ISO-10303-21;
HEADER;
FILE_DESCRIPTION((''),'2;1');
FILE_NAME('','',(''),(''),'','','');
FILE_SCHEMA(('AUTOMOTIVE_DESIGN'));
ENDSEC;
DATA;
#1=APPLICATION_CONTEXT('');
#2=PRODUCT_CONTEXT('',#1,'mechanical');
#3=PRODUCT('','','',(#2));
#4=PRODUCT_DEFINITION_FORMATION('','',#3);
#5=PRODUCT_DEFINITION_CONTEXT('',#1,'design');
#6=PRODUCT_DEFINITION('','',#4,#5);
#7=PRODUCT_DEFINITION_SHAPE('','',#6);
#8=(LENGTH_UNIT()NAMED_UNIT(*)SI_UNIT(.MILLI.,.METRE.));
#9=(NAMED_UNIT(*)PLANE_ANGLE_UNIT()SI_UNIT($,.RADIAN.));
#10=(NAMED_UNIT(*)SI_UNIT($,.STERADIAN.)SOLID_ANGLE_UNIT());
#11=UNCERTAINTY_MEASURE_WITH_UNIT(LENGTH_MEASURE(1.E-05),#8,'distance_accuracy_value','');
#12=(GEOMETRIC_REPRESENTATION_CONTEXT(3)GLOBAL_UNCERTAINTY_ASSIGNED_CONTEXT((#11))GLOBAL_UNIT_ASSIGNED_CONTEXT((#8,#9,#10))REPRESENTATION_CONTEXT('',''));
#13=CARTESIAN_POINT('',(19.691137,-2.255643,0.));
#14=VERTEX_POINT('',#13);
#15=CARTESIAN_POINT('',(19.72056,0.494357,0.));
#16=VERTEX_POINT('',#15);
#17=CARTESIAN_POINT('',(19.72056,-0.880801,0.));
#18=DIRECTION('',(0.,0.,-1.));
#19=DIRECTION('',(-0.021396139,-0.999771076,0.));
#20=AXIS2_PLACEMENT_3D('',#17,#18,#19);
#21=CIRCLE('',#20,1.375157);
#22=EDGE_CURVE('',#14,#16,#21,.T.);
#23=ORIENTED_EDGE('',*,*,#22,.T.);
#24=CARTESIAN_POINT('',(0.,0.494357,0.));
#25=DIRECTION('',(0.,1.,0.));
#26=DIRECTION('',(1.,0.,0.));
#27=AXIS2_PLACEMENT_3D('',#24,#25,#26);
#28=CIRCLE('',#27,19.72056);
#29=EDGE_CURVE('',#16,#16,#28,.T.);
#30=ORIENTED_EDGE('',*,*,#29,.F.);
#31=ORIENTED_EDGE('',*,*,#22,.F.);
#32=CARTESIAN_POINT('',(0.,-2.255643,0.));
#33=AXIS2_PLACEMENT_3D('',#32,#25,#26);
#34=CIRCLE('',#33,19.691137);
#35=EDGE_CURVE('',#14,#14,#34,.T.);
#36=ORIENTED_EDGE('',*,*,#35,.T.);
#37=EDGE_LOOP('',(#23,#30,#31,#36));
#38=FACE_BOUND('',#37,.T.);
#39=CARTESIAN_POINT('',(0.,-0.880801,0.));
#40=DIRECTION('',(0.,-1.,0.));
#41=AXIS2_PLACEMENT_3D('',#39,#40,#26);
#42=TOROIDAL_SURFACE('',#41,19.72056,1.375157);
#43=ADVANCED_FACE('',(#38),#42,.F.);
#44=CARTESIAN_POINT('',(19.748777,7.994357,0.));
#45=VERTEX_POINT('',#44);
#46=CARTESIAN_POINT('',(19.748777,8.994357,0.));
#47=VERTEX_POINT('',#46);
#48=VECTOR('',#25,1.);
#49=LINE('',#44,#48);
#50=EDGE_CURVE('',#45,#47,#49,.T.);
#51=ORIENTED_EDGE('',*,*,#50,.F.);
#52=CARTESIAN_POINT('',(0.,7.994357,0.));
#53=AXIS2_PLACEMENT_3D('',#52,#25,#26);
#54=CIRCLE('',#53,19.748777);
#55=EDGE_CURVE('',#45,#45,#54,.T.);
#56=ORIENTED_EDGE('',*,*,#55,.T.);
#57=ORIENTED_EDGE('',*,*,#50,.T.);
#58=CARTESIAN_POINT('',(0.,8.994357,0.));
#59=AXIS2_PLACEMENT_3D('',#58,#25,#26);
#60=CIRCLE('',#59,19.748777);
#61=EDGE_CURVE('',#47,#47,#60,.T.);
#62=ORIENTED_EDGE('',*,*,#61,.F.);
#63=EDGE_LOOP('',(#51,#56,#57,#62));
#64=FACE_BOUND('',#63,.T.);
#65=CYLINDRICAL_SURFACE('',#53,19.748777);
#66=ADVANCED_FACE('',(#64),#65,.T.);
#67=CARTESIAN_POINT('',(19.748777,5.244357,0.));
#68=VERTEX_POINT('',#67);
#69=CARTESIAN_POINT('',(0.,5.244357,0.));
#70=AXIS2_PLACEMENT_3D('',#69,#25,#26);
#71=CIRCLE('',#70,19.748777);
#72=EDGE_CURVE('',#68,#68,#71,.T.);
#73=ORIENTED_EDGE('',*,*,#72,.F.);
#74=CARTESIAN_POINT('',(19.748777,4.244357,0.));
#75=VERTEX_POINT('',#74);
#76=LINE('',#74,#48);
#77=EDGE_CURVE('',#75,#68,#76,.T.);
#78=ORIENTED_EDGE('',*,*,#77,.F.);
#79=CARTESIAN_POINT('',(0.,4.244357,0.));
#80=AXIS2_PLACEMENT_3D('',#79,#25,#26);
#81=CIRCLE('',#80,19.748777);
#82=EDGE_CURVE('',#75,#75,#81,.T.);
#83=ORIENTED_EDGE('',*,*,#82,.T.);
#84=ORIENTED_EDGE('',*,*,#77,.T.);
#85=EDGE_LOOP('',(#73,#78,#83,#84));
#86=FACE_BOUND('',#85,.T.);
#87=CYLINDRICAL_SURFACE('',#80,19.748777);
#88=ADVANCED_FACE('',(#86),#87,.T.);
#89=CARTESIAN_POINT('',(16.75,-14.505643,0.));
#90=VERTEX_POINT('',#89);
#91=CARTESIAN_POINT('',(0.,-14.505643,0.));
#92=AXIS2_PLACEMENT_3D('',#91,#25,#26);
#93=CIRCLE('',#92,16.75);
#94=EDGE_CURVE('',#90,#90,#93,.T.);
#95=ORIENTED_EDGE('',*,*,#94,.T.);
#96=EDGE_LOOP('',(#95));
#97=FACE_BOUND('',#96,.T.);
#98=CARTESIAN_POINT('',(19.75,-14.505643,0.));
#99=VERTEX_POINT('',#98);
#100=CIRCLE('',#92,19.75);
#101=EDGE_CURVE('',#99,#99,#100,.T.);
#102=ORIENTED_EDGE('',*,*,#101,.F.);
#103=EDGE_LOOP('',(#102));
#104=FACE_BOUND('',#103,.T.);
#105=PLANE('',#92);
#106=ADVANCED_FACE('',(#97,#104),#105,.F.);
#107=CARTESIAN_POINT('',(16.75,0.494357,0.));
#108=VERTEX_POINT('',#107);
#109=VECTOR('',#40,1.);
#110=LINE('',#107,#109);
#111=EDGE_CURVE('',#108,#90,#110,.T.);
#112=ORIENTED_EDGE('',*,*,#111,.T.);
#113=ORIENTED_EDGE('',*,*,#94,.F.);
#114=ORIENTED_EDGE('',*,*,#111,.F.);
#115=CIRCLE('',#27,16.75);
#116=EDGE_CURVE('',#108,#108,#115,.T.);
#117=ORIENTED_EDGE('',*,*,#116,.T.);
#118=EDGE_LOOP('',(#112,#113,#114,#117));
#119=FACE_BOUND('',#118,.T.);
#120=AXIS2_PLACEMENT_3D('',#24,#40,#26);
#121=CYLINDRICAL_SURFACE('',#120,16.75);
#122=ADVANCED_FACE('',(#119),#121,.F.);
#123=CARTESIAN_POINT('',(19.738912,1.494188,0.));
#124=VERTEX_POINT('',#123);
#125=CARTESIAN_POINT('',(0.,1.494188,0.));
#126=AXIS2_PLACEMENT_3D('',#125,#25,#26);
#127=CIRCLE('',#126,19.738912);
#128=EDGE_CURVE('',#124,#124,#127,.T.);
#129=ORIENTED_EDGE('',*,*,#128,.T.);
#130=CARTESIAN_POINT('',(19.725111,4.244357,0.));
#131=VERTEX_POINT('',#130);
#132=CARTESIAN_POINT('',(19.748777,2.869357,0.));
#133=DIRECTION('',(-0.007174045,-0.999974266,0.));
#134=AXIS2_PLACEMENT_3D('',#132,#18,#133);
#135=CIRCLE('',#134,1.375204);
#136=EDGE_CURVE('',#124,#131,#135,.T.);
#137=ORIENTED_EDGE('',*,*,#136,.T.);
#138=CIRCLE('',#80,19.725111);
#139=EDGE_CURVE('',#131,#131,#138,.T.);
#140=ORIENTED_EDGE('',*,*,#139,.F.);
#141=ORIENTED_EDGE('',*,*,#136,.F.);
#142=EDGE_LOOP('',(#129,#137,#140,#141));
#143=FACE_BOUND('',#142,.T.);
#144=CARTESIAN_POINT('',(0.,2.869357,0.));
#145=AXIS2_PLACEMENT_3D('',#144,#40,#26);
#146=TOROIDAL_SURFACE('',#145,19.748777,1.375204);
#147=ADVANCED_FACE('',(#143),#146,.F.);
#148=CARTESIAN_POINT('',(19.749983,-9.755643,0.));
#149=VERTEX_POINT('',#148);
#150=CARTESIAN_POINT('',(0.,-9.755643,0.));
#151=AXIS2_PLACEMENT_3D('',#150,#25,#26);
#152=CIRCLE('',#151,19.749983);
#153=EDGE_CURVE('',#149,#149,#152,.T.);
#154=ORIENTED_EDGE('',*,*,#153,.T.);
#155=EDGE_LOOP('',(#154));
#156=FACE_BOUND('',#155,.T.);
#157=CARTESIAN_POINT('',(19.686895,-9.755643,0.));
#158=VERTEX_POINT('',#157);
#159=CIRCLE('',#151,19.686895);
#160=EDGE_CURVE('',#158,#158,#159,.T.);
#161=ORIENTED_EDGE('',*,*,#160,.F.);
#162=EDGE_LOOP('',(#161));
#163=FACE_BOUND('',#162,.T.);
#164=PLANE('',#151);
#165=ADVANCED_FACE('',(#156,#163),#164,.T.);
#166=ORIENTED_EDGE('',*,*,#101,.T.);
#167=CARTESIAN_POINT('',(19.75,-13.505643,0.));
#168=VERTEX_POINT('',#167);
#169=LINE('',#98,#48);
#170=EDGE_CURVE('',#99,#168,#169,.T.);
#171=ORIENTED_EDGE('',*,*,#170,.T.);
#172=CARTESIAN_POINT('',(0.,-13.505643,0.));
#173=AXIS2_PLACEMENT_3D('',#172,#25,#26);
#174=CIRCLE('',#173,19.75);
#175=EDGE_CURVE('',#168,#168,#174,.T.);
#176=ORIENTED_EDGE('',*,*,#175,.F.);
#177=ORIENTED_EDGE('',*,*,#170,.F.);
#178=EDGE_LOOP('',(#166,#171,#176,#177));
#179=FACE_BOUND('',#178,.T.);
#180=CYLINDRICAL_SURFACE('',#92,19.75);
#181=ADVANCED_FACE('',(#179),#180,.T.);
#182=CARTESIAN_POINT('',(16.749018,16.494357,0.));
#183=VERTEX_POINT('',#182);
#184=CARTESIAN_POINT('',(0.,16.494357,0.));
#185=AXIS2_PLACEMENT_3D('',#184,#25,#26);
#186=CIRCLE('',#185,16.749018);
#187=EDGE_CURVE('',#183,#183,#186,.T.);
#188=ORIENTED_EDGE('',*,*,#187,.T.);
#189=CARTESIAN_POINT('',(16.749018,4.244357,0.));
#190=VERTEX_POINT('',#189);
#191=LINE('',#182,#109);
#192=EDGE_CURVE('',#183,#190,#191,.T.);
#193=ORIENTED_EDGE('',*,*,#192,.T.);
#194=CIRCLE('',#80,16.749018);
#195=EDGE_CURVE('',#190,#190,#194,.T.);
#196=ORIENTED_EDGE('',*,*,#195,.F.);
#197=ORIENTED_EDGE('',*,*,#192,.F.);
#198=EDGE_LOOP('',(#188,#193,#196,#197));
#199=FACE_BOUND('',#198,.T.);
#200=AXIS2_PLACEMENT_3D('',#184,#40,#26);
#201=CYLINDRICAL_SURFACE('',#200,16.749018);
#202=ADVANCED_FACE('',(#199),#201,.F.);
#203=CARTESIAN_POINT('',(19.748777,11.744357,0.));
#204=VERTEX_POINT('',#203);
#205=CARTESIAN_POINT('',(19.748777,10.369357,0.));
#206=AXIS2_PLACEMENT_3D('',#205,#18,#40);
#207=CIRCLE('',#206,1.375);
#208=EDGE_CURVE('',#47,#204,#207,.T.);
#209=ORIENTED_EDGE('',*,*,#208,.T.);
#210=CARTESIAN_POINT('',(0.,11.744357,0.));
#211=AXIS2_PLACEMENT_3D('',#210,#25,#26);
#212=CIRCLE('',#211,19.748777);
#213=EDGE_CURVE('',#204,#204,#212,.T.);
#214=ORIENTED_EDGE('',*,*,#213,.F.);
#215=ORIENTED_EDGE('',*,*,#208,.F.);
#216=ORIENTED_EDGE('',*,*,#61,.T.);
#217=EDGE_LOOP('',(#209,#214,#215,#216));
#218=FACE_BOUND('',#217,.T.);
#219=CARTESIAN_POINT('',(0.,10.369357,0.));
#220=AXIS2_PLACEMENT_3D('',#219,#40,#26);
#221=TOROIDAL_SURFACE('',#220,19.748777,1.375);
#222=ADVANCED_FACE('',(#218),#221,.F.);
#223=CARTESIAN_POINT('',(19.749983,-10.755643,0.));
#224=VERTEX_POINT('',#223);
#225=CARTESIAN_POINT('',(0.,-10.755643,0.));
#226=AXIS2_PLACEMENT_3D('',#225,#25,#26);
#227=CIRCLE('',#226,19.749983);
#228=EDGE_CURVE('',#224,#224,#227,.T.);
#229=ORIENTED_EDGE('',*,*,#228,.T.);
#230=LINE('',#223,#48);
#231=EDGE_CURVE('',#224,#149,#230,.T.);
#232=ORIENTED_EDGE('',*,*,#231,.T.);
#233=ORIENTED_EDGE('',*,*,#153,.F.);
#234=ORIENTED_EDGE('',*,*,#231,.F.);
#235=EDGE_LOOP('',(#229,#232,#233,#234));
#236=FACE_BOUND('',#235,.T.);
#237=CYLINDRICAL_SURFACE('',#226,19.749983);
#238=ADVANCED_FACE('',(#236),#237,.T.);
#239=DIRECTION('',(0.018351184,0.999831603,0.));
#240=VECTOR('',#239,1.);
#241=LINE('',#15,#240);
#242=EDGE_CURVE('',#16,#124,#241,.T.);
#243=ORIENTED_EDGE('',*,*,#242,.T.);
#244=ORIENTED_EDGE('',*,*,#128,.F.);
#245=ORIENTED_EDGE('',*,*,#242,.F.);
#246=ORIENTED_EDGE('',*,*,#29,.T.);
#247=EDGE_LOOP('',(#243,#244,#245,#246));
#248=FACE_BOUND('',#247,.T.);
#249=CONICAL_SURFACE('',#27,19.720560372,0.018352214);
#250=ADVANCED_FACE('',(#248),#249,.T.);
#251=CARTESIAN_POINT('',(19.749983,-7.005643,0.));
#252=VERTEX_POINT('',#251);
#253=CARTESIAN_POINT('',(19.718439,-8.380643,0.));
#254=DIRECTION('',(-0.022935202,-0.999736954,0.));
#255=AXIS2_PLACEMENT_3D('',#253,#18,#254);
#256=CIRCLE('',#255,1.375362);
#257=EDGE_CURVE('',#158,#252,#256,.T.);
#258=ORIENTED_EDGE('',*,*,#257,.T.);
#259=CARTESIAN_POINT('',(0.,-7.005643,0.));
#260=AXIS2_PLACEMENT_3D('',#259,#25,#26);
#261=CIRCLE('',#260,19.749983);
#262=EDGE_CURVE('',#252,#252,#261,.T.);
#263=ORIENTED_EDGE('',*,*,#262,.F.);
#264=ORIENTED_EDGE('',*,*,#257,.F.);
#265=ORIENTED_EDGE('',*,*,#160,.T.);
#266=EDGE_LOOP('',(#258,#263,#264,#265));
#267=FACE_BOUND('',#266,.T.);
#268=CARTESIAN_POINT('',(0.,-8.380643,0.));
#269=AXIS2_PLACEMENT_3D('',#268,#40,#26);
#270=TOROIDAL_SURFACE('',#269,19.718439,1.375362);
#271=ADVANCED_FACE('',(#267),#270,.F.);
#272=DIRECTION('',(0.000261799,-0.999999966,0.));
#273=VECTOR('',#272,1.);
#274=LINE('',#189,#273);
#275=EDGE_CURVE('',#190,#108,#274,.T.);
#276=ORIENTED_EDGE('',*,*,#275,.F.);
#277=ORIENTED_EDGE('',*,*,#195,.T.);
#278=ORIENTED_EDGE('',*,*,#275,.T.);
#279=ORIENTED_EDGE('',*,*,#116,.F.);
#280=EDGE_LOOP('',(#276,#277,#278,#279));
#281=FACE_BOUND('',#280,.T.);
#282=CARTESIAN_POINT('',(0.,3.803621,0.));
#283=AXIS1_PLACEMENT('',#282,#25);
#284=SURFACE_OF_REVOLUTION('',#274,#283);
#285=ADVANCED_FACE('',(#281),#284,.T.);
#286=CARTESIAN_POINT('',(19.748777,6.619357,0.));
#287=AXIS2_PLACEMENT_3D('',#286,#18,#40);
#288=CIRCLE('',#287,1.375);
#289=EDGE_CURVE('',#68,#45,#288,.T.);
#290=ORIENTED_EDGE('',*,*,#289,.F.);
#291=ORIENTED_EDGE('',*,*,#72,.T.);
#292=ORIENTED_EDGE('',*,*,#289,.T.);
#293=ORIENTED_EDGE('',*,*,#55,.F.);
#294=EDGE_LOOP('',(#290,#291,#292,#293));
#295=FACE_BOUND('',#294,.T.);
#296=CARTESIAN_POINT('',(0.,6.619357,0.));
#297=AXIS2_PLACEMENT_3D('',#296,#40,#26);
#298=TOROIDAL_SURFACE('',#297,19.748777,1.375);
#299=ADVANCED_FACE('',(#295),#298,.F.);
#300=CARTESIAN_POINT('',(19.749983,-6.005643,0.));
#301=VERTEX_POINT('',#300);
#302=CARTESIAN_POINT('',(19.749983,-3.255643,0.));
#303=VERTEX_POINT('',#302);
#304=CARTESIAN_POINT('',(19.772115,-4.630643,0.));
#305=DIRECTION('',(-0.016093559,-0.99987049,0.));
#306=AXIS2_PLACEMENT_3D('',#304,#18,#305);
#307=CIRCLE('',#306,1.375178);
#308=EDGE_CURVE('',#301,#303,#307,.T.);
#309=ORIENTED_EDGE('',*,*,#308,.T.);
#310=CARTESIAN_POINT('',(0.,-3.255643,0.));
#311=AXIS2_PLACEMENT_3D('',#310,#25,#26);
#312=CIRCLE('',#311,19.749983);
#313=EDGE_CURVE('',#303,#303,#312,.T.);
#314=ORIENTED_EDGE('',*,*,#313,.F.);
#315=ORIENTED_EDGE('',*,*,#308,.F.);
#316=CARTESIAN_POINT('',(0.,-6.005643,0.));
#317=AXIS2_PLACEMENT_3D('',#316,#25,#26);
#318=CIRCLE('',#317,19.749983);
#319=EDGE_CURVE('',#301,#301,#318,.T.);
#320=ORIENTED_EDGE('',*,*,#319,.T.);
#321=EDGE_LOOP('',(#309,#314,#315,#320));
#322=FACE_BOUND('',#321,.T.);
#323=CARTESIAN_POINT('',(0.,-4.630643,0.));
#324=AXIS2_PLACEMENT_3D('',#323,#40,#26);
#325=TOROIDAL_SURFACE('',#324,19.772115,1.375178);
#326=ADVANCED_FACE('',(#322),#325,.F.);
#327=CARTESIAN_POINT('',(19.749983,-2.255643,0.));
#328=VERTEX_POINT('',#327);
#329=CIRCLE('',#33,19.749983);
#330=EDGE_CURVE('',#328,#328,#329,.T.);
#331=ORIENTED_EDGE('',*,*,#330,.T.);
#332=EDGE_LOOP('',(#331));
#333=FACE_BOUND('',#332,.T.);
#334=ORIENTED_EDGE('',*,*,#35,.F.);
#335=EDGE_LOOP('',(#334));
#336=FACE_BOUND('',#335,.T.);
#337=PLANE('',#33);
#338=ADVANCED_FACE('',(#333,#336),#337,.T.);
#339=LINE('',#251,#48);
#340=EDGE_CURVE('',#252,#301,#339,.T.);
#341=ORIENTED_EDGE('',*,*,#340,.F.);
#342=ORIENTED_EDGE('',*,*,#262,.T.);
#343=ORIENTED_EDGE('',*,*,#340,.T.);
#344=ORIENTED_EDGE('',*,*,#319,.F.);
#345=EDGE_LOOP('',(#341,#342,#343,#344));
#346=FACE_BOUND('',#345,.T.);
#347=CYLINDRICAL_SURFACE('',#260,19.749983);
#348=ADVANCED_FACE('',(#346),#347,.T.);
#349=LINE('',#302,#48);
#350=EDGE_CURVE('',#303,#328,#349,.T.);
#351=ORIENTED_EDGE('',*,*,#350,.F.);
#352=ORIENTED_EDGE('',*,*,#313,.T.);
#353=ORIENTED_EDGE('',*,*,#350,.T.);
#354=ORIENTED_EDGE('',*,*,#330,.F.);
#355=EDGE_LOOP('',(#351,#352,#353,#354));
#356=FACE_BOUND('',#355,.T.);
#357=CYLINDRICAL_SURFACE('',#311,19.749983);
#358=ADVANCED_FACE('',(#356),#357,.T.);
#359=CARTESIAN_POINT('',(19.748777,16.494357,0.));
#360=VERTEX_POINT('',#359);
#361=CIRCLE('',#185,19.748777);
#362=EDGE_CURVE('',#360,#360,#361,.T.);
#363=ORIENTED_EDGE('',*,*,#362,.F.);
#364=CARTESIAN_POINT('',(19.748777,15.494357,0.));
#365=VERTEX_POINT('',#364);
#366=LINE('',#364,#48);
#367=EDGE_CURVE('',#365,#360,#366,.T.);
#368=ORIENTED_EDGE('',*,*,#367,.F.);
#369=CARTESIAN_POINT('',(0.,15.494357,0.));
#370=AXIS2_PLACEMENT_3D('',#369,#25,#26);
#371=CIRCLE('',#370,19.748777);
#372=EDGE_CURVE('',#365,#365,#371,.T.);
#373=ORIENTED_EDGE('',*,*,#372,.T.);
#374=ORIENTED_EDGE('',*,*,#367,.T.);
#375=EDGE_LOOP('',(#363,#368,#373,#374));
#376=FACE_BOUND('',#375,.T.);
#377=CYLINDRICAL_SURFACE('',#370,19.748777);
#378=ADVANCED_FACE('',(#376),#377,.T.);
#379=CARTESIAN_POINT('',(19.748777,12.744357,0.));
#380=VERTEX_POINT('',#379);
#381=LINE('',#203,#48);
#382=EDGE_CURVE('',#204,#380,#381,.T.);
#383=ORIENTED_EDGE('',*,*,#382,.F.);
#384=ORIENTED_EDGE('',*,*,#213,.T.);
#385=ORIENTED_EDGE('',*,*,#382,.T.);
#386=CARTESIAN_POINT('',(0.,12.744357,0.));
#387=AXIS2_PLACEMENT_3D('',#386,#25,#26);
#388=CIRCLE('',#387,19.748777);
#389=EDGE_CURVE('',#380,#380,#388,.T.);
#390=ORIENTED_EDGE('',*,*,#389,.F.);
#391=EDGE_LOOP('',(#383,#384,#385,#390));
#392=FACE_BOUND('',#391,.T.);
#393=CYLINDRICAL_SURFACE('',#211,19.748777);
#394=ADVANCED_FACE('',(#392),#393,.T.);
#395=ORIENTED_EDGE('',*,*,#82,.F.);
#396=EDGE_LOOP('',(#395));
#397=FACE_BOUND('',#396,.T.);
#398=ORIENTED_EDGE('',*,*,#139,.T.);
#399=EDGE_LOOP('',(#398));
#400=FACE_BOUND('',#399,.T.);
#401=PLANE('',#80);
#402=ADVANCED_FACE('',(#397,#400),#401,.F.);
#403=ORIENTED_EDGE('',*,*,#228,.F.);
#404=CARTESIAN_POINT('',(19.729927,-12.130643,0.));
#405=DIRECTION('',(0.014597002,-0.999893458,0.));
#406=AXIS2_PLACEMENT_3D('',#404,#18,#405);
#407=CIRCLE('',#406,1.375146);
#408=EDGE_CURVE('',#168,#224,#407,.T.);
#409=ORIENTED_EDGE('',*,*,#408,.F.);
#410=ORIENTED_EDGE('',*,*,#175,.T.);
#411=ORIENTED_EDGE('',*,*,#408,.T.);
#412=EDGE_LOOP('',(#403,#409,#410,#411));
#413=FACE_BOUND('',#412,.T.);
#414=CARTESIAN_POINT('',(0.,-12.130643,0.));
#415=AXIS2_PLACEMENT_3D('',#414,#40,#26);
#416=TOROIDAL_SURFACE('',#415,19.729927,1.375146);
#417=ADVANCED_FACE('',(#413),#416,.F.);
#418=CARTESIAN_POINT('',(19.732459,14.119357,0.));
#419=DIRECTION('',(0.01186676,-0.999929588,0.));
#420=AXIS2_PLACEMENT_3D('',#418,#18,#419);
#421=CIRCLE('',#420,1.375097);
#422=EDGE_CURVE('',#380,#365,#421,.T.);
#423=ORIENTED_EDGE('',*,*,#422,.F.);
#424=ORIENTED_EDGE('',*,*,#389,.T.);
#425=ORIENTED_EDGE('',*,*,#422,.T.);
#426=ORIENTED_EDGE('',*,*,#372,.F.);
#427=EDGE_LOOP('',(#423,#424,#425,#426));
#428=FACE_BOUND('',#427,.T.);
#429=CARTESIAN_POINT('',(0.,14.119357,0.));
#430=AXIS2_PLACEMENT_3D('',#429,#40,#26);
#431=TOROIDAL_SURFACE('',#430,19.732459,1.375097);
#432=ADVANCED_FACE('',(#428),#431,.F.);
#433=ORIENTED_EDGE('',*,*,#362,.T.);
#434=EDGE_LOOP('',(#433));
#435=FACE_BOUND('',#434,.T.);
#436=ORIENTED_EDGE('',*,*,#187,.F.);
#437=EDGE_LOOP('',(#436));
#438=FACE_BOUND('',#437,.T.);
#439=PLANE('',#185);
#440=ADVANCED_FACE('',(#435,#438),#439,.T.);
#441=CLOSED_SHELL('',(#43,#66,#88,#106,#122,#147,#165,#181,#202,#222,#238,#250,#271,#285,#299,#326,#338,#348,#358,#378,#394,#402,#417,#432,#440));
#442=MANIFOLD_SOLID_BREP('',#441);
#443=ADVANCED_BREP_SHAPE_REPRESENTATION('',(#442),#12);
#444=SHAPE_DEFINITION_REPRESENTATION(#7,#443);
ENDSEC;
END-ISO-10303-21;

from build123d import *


# Not quite as in the source:
# - a feature names something its author has since deleted; it is built from what else it names


with BuildPart() as f1:
    # F0 (on Top) → F1 (revolve)
    with BuildSketch(Plane.XY):
        with BuildLine():
            Line((19.7205603719, 0.4943568721), (16.75, 0.4943568721))
            Line((16.75, 0.4943568721), (16.75, 0))
            Line((16.75, 0), (16.75, -2.2556431279))
            Line((16.75, -2.2556431279), (19.6911373127, -2.2556431279))
            ThreePointArc((19.6911373127, -2.2556431279), (18.3454816726, -0.8660881593), (19.7205603719, 0.4943568721))
        make_face()
        with BuildLine():
            Line((16.7490182523, 4.2443567436), (16.75, 0.4943568721))
            Line((16.75, 0.4943568721), (19.7205603719, 0.4943568721))
            Line((19.7205603719, 0.4943568721), (19.7389115558, 1.4941884749))
            ThreePointArc((19.7389115558, 1.4941884749), (18.3735909849, 2.8624558945), (19.7251108834, 4.2443567436))
            Line((19.7251108834, 4.2443567436), (16.7490182523, 4.2443567436))
        make_face()
        with BuildLine():
            Line((16.7490182523, 7.9943567436), (16.7490182523, 4.2443567436))
            Line((16.7490182523, 4.2443567436), (19.7251108834, 4.2443567436))
            ThreePointArc((19.7251108834, 4.2443567436), (19.7369436677, 4.244509486), (19.7487773282, 4.2445604014))
            Line((19.7487773282, 4.2445604014), (19.7487773282, 5.2443567436))
            ThreePointArc((19.7487773282, 5.2443567436), (18.3737773282, 6.6193567436), (19.7487773282, 7.9943567436))
            Line((19.7487773282, 7.9943567436), (16.7490182523, 7.9943567436))
        make_face()
        with BuildLine():
            Line((19.6911373127, -2.2556431279), (16.75, -2.2556431279))
            Line((16.75, -2.2556431279), (16.75, -6.0056431279))
            Line((16.75, -6.0056431279), (19.7499834311, -6.0056431279))
            ThreePointArc((19.7499834311, -6.0056431279), (18.3969368426, -4.6306431279), (19.7499834311, -3.2556431279))
            Line((19.7499834311, -3.2556431279), (19.7499834311, -2.2556431279))
            ThreePointArc((19.7499834311, -2.2556431279), (19.7205603719, -2.2559579339), (19.6911373127, -2.2556431279))
        make_face()
        with BuildLine():
            Line((19.7499834311, -2.2556431279), (19.6911373127, -2.2556431279))
            ThreePointArc((19.6911373127, -2.2556431279), (19.7205603719, -2.2559579339), (19.7499834311, -2.2556431279))
        make_face()
        with BuildLine():
            ThreePointArc((19.7487773282, 4.2445604014), (19.7369436677, 4.244509486), (19.7251108834, 4.2443567436))
            Line((19.7251108834, 4.2443567436), (19.7487773282, 4.2443567436))
            Line((19.7487773282, 4.2443567436), (19.7487773282, 4.2445604014))
        make_face()
        with BuildLine():
            Line((16.7490182523, 11.7443567436), (16.7490182523, 7.9943567436))
            Line((16.7490182523, 7.9943567436), (19.7487773282, 7.9943567436))
            Line((19.7487773282, 7.9943567436), (19.7487773282, 8.9943567436))
            ThreePointArc((19.7487773282, 8.9943567436), (18.3737773282, 10.3693567436), (19.7487773282, 11.7443567436))
            Line((19.7487773282, 11.7443567436), (16.7490182523, 11.7443567436))
        make_face()
        with BuildLine():
            Line((19.7499834311, -6.0056431279), (16.75, -6.0056431279))
            Line((16.75, -6.0056431279), (16.75, -9.7556431279))
            Line((16.75, -9.7556431279), (19.68689503, -9.7556431279))
            ThreePointArc((19.68689503, -9.7556431279), (18.3434392305, -8.3490989274), (19.7499834311, -7.0056431279))
            Line((19.7499834311, -7.0056431279), (19.7499834311, -6.0056431279))
        make_face()
        with BuildLine():
            Line((16.7490182523, 16.4943567436), (16.7490182523, 11.7443567436))
            Line((16.7490182523, 11.7443567436), (19.7487773282, 11.7443567436))
            Line((19.7487773282, 11.7443567436), (19.7487773282, 12.7443567436))
            ThreePointArc((19.7487773282, 12.7443567436), (18.3573625608, 14.1193567436), (19.7487773282, 15.4943567436))
            Line((19.7487773282, 15.4943567436), (19.7487773282, 16.4943567436))
            Line((19.7487773282, 16.4943567436), (16.7490182523, 16.4943567436))
        make_face()
        with BuildLine():
            Line((19.68689503, -9.7556431279), (16.75, -9.7556431279))
            Line((16.75, -9.7556431279), (16.75, -14.5056431279))
            Line((16.75, -14.5056431279), (19.75, -14.5056431279))
            Line((19.75, -14.5056431279), (19.75, -13.5056431279))
            ThreePointArc((19.75, -13.5056431279), (18.3547805949, -12.1306515341), (19.7499834311, -10.7556431279))
            Line((19.7499834311, -10.7556431279), (19.7499834311, -9.7556431279))
            ThreePointArc((19.7499834311, -9.7556431279), (19.7184392305, -9.7560049118), (19.68689503, -9.7556431279))
        make_face()
        with BuildLine():
            Line((19.7499834311, -9.7556431279), (19.68689503, -9.7556431279))
            ThreePointArc((19.68689503, -9.7556431279), (19.7184392305, -9.7560049118), (19.7499834311, -9.7556431279))
        make_face()
    revolve(axis=Axis((0, 3.8036210462, 0), (0, 1, 0)))


solid = f1.part
